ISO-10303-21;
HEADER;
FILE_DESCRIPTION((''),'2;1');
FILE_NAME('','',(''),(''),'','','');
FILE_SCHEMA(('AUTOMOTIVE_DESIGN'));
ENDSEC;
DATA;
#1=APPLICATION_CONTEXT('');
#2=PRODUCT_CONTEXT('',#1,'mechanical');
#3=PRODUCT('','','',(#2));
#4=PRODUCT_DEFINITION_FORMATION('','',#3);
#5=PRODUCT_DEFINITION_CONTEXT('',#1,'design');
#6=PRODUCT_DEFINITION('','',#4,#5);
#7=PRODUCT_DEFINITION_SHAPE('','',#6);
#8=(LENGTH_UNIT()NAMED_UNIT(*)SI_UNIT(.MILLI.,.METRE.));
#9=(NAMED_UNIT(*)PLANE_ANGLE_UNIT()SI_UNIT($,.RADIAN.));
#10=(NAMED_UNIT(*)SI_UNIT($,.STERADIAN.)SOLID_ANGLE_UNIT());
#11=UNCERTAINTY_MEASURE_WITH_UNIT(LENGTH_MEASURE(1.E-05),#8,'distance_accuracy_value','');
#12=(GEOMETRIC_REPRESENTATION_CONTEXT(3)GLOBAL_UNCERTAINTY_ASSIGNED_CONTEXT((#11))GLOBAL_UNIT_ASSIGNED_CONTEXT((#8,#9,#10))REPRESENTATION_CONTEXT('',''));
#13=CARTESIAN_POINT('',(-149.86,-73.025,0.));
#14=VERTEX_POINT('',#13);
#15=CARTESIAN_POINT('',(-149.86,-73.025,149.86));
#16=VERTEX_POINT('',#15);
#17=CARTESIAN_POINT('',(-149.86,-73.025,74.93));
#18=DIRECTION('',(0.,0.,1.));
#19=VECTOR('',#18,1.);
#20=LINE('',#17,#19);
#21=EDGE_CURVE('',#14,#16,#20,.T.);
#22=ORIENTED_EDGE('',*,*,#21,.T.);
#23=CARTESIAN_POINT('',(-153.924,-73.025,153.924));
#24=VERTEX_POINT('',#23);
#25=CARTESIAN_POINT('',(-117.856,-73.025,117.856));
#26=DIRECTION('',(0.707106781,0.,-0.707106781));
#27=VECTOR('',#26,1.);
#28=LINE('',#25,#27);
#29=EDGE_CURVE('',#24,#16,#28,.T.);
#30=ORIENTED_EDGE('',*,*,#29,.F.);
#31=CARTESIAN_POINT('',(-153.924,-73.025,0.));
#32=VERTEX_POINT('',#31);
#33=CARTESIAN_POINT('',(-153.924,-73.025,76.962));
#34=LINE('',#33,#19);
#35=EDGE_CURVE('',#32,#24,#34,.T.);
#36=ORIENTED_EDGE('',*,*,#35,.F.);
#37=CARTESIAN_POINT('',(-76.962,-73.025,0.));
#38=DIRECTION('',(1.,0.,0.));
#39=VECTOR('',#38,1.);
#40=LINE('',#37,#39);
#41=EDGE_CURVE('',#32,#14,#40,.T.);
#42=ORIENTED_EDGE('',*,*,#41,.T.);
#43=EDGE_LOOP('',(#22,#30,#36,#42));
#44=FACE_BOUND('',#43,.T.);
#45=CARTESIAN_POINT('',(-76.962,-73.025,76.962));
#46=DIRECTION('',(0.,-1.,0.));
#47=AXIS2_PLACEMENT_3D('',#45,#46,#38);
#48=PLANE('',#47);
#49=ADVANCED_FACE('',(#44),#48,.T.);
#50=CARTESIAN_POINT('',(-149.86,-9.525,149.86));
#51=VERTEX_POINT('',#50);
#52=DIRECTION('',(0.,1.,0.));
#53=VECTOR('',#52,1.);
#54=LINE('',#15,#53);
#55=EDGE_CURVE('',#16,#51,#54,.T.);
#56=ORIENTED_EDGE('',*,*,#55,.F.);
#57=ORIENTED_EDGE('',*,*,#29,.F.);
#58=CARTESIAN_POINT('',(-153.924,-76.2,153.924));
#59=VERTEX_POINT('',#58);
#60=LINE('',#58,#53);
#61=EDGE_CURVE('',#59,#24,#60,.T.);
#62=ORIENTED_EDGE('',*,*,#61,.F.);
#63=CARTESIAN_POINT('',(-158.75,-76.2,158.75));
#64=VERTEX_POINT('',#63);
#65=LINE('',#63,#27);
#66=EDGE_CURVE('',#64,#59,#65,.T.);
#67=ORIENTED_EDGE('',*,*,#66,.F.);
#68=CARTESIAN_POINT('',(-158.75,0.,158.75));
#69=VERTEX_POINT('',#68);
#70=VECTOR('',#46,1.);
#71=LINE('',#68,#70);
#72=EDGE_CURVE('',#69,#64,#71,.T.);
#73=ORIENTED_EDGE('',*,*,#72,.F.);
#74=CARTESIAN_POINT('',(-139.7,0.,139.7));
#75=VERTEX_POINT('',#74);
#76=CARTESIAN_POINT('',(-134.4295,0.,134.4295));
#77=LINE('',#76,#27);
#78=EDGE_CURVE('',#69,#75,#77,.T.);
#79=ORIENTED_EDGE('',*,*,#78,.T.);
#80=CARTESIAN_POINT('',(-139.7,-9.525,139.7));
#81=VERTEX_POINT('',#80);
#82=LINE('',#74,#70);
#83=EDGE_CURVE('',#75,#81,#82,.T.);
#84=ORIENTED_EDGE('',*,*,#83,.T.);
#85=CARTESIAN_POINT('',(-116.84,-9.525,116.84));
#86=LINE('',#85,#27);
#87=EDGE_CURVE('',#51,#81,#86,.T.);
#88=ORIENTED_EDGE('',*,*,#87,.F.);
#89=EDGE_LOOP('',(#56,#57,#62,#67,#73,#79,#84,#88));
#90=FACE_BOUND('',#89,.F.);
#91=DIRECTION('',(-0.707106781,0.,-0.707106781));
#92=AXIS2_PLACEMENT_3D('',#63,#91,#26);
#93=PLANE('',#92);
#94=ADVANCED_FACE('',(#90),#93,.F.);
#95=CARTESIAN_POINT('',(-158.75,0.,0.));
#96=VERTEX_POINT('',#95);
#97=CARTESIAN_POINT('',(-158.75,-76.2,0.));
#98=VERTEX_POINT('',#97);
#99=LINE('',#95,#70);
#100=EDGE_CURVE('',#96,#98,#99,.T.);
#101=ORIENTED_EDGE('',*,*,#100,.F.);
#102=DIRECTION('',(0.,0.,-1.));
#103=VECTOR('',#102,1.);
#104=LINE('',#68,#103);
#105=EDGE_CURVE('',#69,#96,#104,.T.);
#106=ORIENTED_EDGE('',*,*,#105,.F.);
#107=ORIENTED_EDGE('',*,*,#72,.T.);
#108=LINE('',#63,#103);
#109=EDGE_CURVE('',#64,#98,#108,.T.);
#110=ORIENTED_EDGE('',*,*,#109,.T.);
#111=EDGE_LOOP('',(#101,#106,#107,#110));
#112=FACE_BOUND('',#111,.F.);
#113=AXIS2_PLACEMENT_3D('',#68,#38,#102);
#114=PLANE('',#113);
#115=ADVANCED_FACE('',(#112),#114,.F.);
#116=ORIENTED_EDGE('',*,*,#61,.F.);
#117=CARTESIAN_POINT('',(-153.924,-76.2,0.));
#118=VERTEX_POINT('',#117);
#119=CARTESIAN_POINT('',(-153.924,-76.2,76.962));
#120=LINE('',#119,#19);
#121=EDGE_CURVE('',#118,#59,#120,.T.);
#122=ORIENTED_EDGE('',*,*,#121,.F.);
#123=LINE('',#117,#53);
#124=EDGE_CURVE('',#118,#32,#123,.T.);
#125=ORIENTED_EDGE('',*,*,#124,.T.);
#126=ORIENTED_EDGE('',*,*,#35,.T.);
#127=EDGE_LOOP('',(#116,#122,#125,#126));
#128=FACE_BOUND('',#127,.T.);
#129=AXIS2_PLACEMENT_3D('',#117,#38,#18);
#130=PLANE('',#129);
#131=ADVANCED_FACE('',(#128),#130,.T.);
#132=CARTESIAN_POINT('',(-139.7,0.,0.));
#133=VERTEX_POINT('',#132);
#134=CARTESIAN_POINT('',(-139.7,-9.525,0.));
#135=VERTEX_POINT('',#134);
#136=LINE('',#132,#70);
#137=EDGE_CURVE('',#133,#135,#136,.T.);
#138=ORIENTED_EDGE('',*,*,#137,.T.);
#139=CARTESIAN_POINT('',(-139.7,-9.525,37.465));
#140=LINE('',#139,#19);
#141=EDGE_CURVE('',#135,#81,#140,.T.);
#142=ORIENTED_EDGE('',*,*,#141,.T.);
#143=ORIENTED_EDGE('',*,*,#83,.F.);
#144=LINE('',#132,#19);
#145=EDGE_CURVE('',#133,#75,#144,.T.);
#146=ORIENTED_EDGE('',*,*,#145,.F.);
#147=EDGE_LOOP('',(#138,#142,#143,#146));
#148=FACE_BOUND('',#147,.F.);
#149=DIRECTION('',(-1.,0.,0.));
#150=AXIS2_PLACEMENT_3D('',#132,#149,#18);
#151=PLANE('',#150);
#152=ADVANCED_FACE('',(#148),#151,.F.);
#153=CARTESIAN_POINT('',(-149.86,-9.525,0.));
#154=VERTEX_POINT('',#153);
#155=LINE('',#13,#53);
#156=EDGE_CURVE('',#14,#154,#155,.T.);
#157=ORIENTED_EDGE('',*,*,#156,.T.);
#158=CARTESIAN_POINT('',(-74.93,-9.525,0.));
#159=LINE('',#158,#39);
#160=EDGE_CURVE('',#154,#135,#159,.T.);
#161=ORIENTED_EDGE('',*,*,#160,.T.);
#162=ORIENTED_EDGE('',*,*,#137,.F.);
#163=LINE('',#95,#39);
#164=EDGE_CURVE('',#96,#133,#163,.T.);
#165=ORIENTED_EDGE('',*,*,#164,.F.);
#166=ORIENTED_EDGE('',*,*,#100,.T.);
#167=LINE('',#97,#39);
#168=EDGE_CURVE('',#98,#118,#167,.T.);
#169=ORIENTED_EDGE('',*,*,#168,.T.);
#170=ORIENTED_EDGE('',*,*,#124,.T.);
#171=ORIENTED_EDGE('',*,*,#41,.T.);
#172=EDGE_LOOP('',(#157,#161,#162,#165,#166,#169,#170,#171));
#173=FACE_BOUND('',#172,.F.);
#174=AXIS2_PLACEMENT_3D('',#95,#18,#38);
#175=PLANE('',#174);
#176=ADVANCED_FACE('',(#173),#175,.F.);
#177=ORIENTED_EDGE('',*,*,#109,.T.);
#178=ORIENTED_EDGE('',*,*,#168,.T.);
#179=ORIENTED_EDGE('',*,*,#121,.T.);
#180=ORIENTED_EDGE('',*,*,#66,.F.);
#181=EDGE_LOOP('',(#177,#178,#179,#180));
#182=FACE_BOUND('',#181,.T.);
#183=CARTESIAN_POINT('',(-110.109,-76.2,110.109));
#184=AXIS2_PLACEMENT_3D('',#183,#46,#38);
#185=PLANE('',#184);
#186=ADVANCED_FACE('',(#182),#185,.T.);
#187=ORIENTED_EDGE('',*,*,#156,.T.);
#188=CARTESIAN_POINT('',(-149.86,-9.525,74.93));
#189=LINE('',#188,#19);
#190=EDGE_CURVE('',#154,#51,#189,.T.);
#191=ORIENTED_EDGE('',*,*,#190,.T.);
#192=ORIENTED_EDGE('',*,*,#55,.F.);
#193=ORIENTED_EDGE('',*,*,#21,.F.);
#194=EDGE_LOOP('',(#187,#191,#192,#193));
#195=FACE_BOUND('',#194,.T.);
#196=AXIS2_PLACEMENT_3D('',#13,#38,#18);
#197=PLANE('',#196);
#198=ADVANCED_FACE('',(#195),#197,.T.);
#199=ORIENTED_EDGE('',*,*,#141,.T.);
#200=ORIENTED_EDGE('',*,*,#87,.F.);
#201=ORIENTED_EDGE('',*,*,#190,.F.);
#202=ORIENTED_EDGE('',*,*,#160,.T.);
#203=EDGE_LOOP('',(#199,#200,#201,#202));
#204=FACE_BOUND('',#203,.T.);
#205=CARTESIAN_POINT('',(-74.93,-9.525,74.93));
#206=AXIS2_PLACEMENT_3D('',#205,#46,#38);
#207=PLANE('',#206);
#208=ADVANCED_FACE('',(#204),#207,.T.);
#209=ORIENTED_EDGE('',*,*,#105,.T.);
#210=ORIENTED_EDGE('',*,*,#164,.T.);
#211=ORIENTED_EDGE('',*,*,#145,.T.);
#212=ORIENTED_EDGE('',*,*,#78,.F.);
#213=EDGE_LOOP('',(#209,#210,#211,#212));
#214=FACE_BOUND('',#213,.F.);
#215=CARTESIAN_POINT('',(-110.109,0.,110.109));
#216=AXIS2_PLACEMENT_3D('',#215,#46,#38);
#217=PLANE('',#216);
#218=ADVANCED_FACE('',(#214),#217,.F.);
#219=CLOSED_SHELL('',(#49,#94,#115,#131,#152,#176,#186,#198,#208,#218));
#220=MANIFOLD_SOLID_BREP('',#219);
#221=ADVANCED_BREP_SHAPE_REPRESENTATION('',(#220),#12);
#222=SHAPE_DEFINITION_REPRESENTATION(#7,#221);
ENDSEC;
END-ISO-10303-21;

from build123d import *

# Parameters (mm, degrees)
F1_DEPTH = 76.2
F2_W     = 153.924
F2_H     = 153.924
F3_DEPTH = 3.175
F4_W     = 149.86
F4_H     = 149.86
F5_DEPTH = 63.5
F7_DEPTH = 76.201


# Not quite as in the source:
# - a feature names something its author has since deleted; it is built from what else it names


with BuildPart() as f1:
    # F0 (on Front) → F1 (new body)
    with BuildSketch(Plane.XZ):
        Polygon((0, 139.7), (0, 158.75), (-158.75, 158.75), (-158.75, 0), (-139.7, 0), (-139.7, 139.7), align=None)
    extrude(amount=F1_DEPTH)

    # F2 (on face) → F3 (cut)
    with BuildSketch(Plane.XZ.offset(76.2)):
        with Locations((-76.962, 76.962)):
            Rectangle(F2_W, F2_H)
    extrude(amount=-F3_DEPTH, mode=Mode.SUBTRACT)

    # F4 (on face) → F5 (cut)
    with BuildSketch(Plane.XZ.offset(73.025)):
        with Locations((-74.93, 74.93)):
            Rectangle(F4_W, F4_H)
    extrude(amount=-F5_DEPTH, mode=Mode.SUBTRACT)

    # F6 (on face) → F7 (cut, through all)
    with BuildSketch(Plane.XZ.offset(76.2)):
        Polygon((0, 158.75), (-158.75, 158.75), (-139.7, 139.7), (0, 139.7), align=None)
    extrude(amount=-F7_DEPTH, mode=Mode.SUBTRACT)


solid = f1.part
